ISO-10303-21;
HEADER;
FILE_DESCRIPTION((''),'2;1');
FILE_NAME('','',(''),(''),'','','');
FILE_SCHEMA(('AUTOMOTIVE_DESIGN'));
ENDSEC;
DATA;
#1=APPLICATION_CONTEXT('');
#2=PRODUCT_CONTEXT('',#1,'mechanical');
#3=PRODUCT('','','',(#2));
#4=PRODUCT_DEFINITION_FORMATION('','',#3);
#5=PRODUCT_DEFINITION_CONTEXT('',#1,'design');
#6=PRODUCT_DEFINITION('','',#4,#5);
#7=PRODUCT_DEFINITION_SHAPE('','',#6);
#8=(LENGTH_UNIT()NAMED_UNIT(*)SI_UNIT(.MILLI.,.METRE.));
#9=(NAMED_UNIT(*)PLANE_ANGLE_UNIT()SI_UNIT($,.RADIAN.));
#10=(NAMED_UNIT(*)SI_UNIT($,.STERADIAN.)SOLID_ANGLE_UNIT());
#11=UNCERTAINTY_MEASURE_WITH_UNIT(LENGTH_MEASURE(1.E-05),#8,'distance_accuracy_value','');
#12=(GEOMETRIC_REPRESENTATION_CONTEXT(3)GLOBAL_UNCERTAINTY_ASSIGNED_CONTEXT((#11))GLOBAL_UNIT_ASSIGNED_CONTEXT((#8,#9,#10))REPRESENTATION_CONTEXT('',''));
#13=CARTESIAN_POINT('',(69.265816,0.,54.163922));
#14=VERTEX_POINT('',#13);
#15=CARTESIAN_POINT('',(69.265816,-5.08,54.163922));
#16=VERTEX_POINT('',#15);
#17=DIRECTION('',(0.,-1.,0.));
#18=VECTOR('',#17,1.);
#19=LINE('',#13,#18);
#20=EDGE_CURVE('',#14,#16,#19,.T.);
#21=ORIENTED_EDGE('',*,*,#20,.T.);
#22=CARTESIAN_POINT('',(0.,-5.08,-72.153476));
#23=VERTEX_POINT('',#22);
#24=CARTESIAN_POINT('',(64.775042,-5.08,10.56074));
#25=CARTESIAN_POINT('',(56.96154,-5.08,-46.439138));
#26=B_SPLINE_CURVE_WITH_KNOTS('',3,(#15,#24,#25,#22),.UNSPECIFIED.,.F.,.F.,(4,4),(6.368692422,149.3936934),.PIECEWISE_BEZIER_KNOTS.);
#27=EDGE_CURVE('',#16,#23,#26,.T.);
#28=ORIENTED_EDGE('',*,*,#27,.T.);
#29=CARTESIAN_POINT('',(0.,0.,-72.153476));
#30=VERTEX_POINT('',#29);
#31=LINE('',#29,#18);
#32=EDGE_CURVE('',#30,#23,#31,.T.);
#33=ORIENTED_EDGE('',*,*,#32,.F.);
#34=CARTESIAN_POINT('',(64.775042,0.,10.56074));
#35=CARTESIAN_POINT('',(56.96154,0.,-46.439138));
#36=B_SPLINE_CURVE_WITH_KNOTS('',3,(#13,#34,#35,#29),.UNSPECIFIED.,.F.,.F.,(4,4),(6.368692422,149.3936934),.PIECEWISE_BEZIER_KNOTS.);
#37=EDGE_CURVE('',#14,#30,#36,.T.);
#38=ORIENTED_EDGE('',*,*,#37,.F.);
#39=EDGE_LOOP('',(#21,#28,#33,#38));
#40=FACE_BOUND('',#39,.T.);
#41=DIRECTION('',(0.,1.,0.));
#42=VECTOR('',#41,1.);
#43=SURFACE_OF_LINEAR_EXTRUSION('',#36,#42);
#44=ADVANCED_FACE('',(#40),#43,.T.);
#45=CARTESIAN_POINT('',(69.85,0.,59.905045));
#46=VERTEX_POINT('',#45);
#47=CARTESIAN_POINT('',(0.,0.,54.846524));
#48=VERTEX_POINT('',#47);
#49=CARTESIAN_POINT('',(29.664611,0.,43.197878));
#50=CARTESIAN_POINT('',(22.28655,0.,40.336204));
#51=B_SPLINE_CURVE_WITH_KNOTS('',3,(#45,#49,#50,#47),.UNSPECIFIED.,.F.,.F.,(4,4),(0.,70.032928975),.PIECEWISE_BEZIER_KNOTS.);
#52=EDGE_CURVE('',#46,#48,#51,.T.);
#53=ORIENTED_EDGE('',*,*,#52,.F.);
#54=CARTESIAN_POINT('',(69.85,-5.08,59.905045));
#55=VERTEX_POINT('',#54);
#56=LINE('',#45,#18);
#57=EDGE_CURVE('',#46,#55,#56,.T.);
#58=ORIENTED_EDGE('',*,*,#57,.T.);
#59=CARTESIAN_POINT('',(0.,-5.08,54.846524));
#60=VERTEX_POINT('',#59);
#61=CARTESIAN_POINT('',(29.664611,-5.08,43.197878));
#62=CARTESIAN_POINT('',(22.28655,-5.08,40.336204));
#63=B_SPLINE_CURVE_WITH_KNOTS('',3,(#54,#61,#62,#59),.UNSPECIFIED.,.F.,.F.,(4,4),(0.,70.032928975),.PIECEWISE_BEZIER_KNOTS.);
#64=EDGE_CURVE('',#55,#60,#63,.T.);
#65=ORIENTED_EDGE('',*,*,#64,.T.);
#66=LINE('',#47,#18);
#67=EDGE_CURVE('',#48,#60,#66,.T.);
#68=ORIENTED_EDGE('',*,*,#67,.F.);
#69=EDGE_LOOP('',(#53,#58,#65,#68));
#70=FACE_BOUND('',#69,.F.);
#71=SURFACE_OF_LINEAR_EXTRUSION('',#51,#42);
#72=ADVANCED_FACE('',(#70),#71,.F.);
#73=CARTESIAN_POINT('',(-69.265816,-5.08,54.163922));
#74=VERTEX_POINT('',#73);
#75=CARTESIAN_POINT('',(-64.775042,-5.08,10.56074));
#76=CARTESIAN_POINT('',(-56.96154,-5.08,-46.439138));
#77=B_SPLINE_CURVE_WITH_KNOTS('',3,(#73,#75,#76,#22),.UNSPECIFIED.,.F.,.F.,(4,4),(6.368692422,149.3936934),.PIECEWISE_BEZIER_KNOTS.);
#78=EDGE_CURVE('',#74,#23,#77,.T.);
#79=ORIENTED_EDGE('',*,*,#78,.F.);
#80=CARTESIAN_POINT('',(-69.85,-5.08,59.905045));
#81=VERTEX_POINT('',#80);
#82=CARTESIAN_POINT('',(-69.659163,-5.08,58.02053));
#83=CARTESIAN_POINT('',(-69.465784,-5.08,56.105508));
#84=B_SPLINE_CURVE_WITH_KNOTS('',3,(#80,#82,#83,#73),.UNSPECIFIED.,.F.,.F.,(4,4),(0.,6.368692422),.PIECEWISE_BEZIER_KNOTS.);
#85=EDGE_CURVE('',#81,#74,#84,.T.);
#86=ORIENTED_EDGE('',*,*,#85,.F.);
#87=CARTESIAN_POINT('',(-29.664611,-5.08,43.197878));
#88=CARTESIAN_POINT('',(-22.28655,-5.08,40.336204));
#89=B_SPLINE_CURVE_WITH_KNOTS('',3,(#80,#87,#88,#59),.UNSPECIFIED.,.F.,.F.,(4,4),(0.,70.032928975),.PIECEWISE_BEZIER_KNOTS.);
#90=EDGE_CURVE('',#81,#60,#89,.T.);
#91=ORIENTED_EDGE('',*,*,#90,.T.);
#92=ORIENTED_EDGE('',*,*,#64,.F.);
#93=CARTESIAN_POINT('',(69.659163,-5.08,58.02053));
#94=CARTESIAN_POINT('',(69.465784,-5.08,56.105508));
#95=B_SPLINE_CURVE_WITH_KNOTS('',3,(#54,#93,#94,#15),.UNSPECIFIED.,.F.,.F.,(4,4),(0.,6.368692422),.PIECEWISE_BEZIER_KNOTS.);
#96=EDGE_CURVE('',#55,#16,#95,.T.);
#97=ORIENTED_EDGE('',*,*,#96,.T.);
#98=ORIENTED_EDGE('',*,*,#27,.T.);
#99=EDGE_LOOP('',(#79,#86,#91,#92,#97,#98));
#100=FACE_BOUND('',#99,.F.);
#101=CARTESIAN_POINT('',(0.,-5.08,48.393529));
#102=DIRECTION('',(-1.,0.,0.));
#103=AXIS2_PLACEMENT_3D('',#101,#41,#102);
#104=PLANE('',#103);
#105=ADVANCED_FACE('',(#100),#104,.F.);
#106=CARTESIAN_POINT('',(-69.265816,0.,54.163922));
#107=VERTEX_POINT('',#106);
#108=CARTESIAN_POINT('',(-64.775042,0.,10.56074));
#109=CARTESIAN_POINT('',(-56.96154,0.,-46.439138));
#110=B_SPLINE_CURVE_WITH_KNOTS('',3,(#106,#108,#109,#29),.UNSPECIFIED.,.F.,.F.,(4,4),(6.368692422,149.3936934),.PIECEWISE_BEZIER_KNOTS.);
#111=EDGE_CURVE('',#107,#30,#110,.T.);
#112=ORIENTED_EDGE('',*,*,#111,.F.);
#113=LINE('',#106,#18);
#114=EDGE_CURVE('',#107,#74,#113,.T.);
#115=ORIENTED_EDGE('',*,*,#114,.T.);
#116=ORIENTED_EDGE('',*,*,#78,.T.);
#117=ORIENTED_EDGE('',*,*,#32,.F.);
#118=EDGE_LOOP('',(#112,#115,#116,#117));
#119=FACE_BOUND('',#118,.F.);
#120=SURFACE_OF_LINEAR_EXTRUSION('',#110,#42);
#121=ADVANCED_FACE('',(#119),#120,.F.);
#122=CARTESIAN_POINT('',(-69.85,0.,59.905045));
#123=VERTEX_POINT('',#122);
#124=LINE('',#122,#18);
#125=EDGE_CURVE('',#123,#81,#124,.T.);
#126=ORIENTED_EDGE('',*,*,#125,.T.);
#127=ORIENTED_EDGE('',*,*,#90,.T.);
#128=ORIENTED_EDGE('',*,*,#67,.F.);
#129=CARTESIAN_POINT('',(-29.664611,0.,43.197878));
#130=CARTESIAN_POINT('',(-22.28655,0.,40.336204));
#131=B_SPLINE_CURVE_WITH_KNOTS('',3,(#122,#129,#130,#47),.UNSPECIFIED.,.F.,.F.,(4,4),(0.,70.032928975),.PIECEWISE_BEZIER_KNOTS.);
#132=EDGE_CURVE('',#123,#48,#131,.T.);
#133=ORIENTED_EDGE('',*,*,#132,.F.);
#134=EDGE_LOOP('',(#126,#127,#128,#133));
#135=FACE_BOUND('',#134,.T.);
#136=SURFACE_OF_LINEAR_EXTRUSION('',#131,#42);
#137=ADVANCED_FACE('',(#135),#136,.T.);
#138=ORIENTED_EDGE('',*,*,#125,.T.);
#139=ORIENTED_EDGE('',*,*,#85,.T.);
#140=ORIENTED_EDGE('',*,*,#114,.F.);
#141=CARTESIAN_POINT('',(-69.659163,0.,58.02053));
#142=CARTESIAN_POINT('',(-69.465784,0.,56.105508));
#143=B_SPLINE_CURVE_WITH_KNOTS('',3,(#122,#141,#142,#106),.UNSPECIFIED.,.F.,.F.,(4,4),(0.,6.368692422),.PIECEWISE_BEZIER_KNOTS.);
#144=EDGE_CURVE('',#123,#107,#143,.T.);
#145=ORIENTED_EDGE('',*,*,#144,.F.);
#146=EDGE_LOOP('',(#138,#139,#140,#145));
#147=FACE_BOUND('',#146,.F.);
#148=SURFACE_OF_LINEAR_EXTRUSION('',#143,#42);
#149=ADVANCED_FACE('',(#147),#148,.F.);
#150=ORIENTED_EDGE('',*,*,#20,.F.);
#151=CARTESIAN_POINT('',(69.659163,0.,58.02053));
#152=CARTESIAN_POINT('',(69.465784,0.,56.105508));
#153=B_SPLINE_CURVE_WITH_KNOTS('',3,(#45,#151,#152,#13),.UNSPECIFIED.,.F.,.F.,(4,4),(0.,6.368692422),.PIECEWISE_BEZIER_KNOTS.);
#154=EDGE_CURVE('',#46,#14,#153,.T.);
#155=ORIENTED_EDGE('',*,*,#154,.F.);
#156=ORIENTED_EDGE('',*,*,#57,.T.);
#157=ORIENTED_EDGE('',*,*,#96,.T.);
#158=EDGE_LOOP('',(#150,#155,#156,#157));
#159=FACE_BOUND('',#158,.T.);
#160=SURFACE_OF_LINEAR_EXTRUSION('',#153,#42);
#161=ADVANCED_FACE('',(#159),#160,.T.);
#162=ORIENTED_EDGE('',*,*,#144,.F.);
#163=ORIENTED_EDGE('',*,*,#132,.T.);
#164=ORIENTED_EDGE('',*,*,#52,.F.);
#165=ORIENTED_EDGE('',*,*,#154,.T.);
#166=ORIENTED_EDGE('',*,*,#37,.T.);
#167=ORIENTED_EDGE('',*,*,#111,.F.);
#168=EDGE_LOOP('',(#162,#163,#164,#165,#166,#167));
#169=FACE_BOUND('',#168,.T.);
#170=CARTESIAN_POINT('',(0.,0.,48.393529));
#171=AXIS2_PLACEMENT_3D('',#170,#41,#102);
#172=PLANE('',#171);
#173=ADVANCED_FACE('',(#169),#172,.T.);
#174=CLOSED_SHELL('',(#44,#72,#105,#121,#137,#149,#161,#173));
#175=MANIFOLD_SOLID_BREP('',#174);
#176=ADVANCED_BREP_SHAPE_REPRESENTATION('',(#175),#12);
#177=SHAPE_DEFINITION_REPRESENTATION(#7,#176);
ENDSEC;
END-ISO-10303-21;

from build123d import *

# Parameters (mm, degrees)
F1_DEPTH = 5.08


# Not quite as in the source:
# - ends of sketch curves that miss each other by under 0.0002 mm in the source are joined


with BuildPart() as f1:
    # F0 (on Front) → F1 (new body)
    with BuildSketch(Plane.XZ):
        with BuildLine():
            add(Edge.make_bspline(
                [(69.85, 59.9050451917), (69.6591630317, 58.0205304518), (69.4657837415, 56.105507858), (69.2658161809, 54.1639224361)],
                knots=[0, 0, 0, 0, 6.3686924223, 6.3686924223, 6.3686924223, 6.3686924223], degree=3))
            add(Edge.make_bspline(
                [(69.85, 59.9050451917), (29.6646114439, 43.1978777051), (22.2865504252, 40.336203924), (0, 54.8465235897)],
                knots=[0, 0, 0, 0, 70.0329289749, 70.0329289749, 70.0329289749, 70.0329289749], degree=3))
            add(Edge.make_bspline(
                [(-69.85, 59.9050451917), (-29.6646114439, 43.1978777051), (-22.2865504252, 40.336203924), (0, 54.8465235897)],
                knots=[0, 0, 0, 0, 70.0329289749, 70.0329289749, 70.0329289749, 70.0329289749], degree=3))
            add(Edge.make_bspline(
                [(-69.85, 59.9050451917), (-69.6591630317, 58.0205304518), (-69.4657837415, 56.105507858), (-69.2658161809, 54.1639224361)],
                knots=[0, 0, 0, 0, 6.3686924223, 6.3686924223, 6.3686924223, 6.3686924223], degree=3))
            add(Edge.make_bspline(
                [(-69.2658161783, 54.1639224373), (-68.435377118, 53.8183422364), (-66.6556116111, 53.0753974425), (-64.8761610511, 52.3317704272), (-63.9263795957, 51.9355805251)],
                knots=[2.7434490873, 2.7434490873, 2.7434490873, 2.7434490873, 5.4418546999, 8.5291588217, 8.5291588217, 8.5291588217, 8.5291588217], degree=3))
            add(Edge.make_bspline(
                [(-63.9263795957, 51.9355805251), (-61.8621309574, 51.0745040519), (-56.1021142689, 48.6812764055), (-47.7406374178, 45.3549636264), (-39.4375160633, 42.5935516843), (-33.4464354817, 41.219419811), (-28.7724481834, 40.4865030944), (-24.7049900131, 40.2576737616), (-20.7256507732, 40.4650803867), (-16.8202071601, 41.130682749), (-12.9707995749, 42.2328724248), (-8.7178720085, 43.9515281326), (-4.3615220824, 46.044445106), (-1.3844475727, 47.8958436146), (-0.0332400038, 48.7623797008), (0, 48.7837122639)],
                knots=[8.5291588217, 8.5291588217, 8.5291588217, 8.5291588217, 15.2390848713, 27.2415659858, 35.5219361762, 41.4579165876, 45.6606303606, 49.7014880209, 53.6563538897, 57.5892253523, 61.5614465465, 65.6429176226, 71.3392641934, 76.0338793574, 76.152307097, 76.152307097, 76.152307097, 76.152307097], degree=3))
            add(Edge.make_bspline(
                [(63.9263795957, 51.9355805251), (61.8621309574, 51.0745040519), (56.1021142689, 48.6812764055), (47.7406374178, 45.3549636264), (39.4375160633, 42.5935516843), (33.4464354817, 41.219419811), (28.7724481834, 40.4865030944), (24.7049900131, 40.2576737616), (20.7256507732, 40.4650803867), (16.8202071601, 41.130682749), (12.9707995749, 42.2328724248), (8.7178720085, 43.9515281326), (4.3615220824, 46.044445106), (1.3844475727, 47.8958436146), (0.0332400038, 48.7623797008), (0, 48.7837122639)],
                knots=[8.5291588217, 8.5291588217, 8.5291588217, 8.5291588217, 15.2390848713, 27.2415659858, 35.5219361762, 41.4579165876, 45.6606303606, 49.7014880209, 53.6563538897, 57.5892253523, 61.5614465465, 65.6429176226, 71.3392641934, 76.0338793574, 76.152307097, 76.152307097, 76.152307097, 76.152307097], degree=3))
            add(Edge.make_bspline(
                [(69.2658161783, 54.1639224373), (68.435377118, 53.8183422364), (66.6556116111, 53.0753974425), (64.8761610511, 52.3317704272), (63.9263795957, 51.9355805251)],
                knots=[2.7434490873, 2.7434490873, 2.7434490873, 2.7434490873, 5.4418546999, 8.5291588217, 8.5291588217, 8.5291588217, 8.5291588217], degree=3))
        make_face()
        with BuildLine():
            add(Edge.make_bspline(
                [(69.2658161809, 54.1639224361), (64.7750418343, 10.5607401093), (56.961539529, -46.4391375943), (0, -72.1534764103)],
                knots=[6.3686924223, 6.3686924223, 6.3686924223, 6.3686924223, 149.3936934001, 149.3936934001, 149.3936934001, 149.3936934001], degree=3))
            add(Edge.make_bspline(
                [(69.2658161809, 54.1639224361), (68.435377118, 53.8183422364), (66.6556116111, 53.0753974425), (64.8761610511, 52.3317704272), (63.9263795957, 51.9355805251)],
                knots=[2.7434490873, 2.7434490873, 2.7434490873, 2.7434490873, 5.4418546999, 8.5291588217, 8.5291588217, 8.5291588217, 8.5291588217], degree=3))
            add(Edge.make_bspline(
                [(63.9263795957, 51.9355805251), (63.6253355549, 49.0777517049), (62.6683683388, 40.3495230581), (60.6243910667, 25.2903357755), (56.8644266428, 6.9882226507), (51.2318594545, -10.9343345603), (43.1811515415, -27.8959051236), (32.1695249216, -43.368046578), (18.0779778329, -56.4464882841), (6.2692486092, -63.5700966147), (1.35086e-05, -66.5543592491)],
                knots=[0.0627067414, 0.0627067414, 0.0627067414, 0.0627067414, 0.125, 0.25, 0.375, 0.5, 0.625, 0.75, 0.875, 0.9876294304, 0.9876294304, 0.9876294304, 0.9876294304], degree=3))
            add(Edge.make_bspline(
                [(-63.9263795983, 51.9355805238), (-63.6253355549, 49.0777517049), (-62.6683683388, 40.3495230581), (-60.6243910667, 25.2903357755), (-56.8644266428, 6.9882226507), (-51.2318594545, -10.9343345603), (-43.1811515415, -27.8959051236), (-32.1695249216, -43.368046578), (-18.0779778329, -56.4464882841), (-6.2692486092, -63.5700966147), (1.35086e-05, -66.5543592491)],
                knots=[0.0627067414, 0.0627067414, 0.0627067414, 0.0627067414, 0.125, 0.25, 0.375, 0.5, 0.625, 0.75, 0.875, 0.9876294304, 0.9876294304, 0.9876294304, 0.9876294304], degree=3))
            add(Edge.make_bspline(
                [(-69.2658161783, 54.1639224373), (-68.435377118, 53.8183422364), (-66.6556116111, 53.0753974425), (-64.8761610511, 52.3317704272), (-63.9263795983, 51.9355805238)],
                knots=[2.7434490873, 2.7434490873, 2.7434490873, 2.7434490873, 5.4418546999, 8.5291588217, 8.5291588217, 8.5291588217, 8.5291588217], degree=3))
            add(Edge.make_bspline(
                [(-69.2658161783, 54.1639224373), (-64.7750418343, 10.5607401093), (-56.961539529, -46.4391375943), (0, -72.1534764103)],
                knots=[6.3686924223, 6.3686924223, 6.3686924223, 6.3686924223, 149.3936934001, 149.3936934001, 149.3936934001, 149.3936934001], degree=3))
        make_face()
        with BuildLine():
            add(Edge.make_bspline(
                [(63.9263795983, 51.9355805238), (63.6253355549, 49.0777517049), (62.6683683388, 40.3495230581), (60.6243910667, 25.2903357755), (56.8644266428, 6.9882226507), (51.2318594545, -10.9343345603), (43.1811515415, -27.8959051236), (32.1695249216, -43.368046578), (18.0779778329, -56.4464882841), (6.2692486092, -63.5700966147), (1.35086e-05, -66.5543592491)],
                knots=[0.0627067414, 0.0627067414, 0.0627067414, 0.0627067414, 0.125, 0.25, 0.375, 0.5, 0.625, 0.75, 0.875, 0.9876294304, 0.9876294304, 0.9876294304, 0.9876294304], degree=3))
            add(Edge.make_bspline(
                [(63.9263795983, 51.9355805238), (61.8621309574, 51.0745040519), (56.1021142689, 48.6812764055), (47.7406374178, 45.3549636264), (39.4375160633, 42.5935516843), (33.4464354817, 41.219419811), (28.7724481834, 40.4865030944), (24.7049900131, 40.2576737616), (20.7256507732, 40.4650803867), (16.8202071601, 41.130682749), (12.9707995749, 42.2328724248), (8.7178720085, 43.9515281326), (4.3615220824, 46.044445106), (1.3844475727, 47.8958436146), (0.0332400038, 48.7623797008), (0, 48.7837122639)],
                knots=[8.5291588217, 8.5291588217, 8.5291588217, 8.5291588217, 15.2390848713, 27.2415659858, 35.5219361762, 41.4579165876, 45.6606303606, 49.7014880209, 53.6563538897, 57.5892253523, 61.5614465465, 65.6429176226, 71.3392641934, 76.0338793574, 76.152307097, 76.152307097, 76.152307097, 76.152307097], degree=3))
            add(Edge.make_bspline(
                [(-63.9263795957, 51.9355805251), (-61.8621309574, 51.0745040519), (-56.1021142689, 48.6812764055), (-47.7406374178, 45.3549636264), (-39.4375160633, 42.5935516843), (-33.4464354817, 41.219419811), (-28.7724481834, 40.4865030944), (-24.7049900131, 40.2576737616), (-20.7256507732, 40.4650803867), (-16.8202071601, 41.130682749), (-12.9707995749, 42.2328724248), (-8.7178720085, 43.9515281326), (-4.3615220824, 46.044445106), (-1.3844475727, 47.8958436146), (-0.0332400038, 48.7623797008), (0, 48.7837122639)],
                knots=[8.5291588217, 8.5291588217, 8.5291588217, 8.5291588217, 15.2390848713, 27.2415659858, 35.5219361762, 41.4579165876, 45.6606303606, 49.7014880209, 53.6563538897, 57.5892253523, 61.5614465465, 65.6429176226, 71.3392641934, 76.0338793574, 76.152307097, 76.152307097, 76.152307097, 76.152307097], degree=3))
            add(Edge.make_bspline(
                [(-63.9263795957, 51.9355805251), (-63.6253355549, 49.0777517049), (-62.6683683388, 40.3495230581), (-60.6243910667, 25.2903357755), (-56.8644266428, 6.9882226507), (-51.2318594545, -10.9343345603), (-43.1811515415, -27.8959051236), (-32.1695249216, -43.368046578), (-18.0779778329, -56.4464882841), (-6.2692486092, -63.5700966147), (1.35086e-05, -66.5543592491)],
                knots=[0.0627067414, 0.0627067414, 0.0627067414, 0.0627067414, 0.125, 0.25, 0.375, 0.5, 0.625, 0.75, 0.875, 0.9876294304, 0.9876294304, 0.9876294304, 0.9876294304], degree=3))
        make_face()
    extrude(amount=F1_DEPTH)


solid = f1.part
